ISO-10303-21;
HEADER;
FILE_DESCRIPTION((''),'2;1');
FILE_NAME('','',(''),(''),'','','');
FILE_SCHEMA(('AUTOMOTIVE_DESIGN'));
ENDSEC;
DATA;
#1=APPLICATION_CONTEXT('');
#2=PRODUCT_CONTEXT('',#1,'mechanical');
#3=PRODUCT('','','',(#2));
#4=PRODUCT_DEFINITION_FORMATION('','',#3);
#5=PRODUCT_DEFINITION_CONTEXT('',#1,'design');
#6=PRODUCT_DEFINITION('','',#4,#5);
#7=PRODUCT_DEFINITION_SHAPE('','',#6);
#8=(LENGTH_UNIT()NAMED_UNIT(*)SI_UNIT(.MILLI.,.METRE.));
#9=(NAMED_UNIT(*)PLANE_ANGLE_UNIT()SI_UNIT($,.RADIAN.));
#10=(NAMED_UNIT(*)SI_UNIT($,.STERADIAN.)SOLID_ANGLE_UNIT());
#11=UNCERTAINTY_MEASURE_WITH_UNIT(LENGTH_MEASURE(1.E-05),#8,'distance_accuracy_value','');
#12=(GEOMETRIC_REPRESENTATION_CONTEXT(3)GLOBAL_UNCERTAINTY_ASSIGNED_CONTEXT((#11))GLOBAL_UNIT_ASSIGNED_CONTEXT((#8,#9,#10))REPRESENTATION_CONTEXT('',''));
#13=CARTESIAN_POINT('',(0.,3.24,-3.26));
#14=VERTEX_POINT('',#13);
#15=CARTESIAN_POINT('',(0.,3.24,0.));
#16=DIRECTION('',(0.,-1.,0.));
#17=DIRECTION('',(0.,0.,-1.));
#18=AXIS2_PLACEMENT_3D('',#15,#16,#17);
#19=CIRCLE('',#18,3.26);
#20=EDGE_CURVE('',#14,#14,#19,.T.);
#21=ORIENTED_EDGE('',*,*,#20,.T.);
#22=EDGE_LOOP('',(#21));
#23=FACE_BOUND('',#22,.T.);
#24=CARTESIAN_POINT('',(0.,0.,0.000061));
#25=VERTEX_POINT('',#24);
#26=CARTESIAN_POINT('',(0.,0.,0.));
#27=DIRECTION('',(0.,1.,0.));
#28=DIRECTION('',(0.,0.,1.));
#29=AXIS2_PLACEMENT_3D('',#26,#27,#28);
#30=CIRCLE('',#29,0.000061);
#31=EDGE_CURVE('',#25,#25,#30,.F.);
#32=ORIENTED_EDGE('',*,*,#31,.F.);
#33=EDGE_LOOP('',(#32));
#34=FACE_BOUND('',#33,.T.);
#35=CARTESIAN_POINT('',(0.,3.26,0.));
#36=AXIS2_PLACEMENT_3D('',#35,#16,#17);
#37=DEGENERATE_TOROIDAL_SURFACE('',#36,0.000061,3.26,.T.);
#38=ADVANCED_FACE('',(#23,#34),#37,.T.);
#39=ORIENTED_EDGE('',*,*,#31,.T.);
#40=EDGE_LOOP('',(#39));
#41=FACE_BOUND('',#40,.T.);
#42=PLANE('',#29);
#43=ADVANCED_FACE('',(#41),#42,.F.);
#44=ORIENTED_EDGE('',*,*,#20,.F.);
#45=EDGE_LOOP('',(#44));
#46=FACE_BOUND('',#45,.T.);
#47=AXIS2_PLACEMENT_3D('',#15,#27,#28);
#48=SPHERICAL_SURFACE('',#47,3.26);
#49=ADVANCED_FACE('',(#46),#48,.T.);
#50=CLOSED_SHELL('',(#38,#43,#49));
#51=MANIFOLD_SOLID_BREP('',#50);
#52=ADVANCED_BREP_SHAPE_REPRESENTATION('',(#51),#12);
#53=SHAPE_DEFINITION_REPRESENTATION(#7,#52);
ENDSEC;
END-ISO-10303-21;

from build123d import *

# Parameters (mm, degrees)
SKETCH1_R           = 3.26
BOSS_EXTRUDE1_DEPTH = 6.5
FILLET1_R           = 3.26
FILLET2_R           = 3.26


with BuildPart() as part:
    # Sketch1 → Boss-Extrude1 (new body)
    with BuildSketch(Plane(origin=(0, 0, 0), x_dir=(1, 0, 0), z_dir=(0, 1, 0))):
        with Locations(Location((0, 0, 0), (0, 0, 90))):
            Circle(SKETCH1_R)
    extrude(amount=BOSS_EXTRUDE1_DEPTH)

    # Fillet1
    fillet1_edges = [part.edges().sort_by_distance(p)[0] for p in [
        (0, 6.5, 3.26),
    ]]
    fillet(fillet1_edges, radius=FILLET1_R)

    # Fillet2
    # the kernel refuses this fillet: 3.26 mm, written as the material it takes off along each edge
    with BuildSketch(Plane(origin=(0, 0, 0), x_dir=(0, 0, -1), z_dir=(1, 0, 0))) as fillet2_piece_1:
        with BuildLine():
            CenterArc((6.135e-05, 3.26), FILLET2_R, 270, 89.648489945)
            Line((6.135e-05, 0), (6.135e-05, -0.0652))
            Line((6.135e-05, -0.0652), (3.26, -0.0652))
            Line((3.26, -0.0652), (3.3252, 0))
            Line((3.3252, 0), (3.325198773, 3.2396))
            Line((3.325198773, 3.2396), (3.26, 3.24))
        make_face()
    revolve(axis=Axis((0, 0, 0), (0, 1, 0)), mode=Mode.SUBTRACT)


solid = part.part
